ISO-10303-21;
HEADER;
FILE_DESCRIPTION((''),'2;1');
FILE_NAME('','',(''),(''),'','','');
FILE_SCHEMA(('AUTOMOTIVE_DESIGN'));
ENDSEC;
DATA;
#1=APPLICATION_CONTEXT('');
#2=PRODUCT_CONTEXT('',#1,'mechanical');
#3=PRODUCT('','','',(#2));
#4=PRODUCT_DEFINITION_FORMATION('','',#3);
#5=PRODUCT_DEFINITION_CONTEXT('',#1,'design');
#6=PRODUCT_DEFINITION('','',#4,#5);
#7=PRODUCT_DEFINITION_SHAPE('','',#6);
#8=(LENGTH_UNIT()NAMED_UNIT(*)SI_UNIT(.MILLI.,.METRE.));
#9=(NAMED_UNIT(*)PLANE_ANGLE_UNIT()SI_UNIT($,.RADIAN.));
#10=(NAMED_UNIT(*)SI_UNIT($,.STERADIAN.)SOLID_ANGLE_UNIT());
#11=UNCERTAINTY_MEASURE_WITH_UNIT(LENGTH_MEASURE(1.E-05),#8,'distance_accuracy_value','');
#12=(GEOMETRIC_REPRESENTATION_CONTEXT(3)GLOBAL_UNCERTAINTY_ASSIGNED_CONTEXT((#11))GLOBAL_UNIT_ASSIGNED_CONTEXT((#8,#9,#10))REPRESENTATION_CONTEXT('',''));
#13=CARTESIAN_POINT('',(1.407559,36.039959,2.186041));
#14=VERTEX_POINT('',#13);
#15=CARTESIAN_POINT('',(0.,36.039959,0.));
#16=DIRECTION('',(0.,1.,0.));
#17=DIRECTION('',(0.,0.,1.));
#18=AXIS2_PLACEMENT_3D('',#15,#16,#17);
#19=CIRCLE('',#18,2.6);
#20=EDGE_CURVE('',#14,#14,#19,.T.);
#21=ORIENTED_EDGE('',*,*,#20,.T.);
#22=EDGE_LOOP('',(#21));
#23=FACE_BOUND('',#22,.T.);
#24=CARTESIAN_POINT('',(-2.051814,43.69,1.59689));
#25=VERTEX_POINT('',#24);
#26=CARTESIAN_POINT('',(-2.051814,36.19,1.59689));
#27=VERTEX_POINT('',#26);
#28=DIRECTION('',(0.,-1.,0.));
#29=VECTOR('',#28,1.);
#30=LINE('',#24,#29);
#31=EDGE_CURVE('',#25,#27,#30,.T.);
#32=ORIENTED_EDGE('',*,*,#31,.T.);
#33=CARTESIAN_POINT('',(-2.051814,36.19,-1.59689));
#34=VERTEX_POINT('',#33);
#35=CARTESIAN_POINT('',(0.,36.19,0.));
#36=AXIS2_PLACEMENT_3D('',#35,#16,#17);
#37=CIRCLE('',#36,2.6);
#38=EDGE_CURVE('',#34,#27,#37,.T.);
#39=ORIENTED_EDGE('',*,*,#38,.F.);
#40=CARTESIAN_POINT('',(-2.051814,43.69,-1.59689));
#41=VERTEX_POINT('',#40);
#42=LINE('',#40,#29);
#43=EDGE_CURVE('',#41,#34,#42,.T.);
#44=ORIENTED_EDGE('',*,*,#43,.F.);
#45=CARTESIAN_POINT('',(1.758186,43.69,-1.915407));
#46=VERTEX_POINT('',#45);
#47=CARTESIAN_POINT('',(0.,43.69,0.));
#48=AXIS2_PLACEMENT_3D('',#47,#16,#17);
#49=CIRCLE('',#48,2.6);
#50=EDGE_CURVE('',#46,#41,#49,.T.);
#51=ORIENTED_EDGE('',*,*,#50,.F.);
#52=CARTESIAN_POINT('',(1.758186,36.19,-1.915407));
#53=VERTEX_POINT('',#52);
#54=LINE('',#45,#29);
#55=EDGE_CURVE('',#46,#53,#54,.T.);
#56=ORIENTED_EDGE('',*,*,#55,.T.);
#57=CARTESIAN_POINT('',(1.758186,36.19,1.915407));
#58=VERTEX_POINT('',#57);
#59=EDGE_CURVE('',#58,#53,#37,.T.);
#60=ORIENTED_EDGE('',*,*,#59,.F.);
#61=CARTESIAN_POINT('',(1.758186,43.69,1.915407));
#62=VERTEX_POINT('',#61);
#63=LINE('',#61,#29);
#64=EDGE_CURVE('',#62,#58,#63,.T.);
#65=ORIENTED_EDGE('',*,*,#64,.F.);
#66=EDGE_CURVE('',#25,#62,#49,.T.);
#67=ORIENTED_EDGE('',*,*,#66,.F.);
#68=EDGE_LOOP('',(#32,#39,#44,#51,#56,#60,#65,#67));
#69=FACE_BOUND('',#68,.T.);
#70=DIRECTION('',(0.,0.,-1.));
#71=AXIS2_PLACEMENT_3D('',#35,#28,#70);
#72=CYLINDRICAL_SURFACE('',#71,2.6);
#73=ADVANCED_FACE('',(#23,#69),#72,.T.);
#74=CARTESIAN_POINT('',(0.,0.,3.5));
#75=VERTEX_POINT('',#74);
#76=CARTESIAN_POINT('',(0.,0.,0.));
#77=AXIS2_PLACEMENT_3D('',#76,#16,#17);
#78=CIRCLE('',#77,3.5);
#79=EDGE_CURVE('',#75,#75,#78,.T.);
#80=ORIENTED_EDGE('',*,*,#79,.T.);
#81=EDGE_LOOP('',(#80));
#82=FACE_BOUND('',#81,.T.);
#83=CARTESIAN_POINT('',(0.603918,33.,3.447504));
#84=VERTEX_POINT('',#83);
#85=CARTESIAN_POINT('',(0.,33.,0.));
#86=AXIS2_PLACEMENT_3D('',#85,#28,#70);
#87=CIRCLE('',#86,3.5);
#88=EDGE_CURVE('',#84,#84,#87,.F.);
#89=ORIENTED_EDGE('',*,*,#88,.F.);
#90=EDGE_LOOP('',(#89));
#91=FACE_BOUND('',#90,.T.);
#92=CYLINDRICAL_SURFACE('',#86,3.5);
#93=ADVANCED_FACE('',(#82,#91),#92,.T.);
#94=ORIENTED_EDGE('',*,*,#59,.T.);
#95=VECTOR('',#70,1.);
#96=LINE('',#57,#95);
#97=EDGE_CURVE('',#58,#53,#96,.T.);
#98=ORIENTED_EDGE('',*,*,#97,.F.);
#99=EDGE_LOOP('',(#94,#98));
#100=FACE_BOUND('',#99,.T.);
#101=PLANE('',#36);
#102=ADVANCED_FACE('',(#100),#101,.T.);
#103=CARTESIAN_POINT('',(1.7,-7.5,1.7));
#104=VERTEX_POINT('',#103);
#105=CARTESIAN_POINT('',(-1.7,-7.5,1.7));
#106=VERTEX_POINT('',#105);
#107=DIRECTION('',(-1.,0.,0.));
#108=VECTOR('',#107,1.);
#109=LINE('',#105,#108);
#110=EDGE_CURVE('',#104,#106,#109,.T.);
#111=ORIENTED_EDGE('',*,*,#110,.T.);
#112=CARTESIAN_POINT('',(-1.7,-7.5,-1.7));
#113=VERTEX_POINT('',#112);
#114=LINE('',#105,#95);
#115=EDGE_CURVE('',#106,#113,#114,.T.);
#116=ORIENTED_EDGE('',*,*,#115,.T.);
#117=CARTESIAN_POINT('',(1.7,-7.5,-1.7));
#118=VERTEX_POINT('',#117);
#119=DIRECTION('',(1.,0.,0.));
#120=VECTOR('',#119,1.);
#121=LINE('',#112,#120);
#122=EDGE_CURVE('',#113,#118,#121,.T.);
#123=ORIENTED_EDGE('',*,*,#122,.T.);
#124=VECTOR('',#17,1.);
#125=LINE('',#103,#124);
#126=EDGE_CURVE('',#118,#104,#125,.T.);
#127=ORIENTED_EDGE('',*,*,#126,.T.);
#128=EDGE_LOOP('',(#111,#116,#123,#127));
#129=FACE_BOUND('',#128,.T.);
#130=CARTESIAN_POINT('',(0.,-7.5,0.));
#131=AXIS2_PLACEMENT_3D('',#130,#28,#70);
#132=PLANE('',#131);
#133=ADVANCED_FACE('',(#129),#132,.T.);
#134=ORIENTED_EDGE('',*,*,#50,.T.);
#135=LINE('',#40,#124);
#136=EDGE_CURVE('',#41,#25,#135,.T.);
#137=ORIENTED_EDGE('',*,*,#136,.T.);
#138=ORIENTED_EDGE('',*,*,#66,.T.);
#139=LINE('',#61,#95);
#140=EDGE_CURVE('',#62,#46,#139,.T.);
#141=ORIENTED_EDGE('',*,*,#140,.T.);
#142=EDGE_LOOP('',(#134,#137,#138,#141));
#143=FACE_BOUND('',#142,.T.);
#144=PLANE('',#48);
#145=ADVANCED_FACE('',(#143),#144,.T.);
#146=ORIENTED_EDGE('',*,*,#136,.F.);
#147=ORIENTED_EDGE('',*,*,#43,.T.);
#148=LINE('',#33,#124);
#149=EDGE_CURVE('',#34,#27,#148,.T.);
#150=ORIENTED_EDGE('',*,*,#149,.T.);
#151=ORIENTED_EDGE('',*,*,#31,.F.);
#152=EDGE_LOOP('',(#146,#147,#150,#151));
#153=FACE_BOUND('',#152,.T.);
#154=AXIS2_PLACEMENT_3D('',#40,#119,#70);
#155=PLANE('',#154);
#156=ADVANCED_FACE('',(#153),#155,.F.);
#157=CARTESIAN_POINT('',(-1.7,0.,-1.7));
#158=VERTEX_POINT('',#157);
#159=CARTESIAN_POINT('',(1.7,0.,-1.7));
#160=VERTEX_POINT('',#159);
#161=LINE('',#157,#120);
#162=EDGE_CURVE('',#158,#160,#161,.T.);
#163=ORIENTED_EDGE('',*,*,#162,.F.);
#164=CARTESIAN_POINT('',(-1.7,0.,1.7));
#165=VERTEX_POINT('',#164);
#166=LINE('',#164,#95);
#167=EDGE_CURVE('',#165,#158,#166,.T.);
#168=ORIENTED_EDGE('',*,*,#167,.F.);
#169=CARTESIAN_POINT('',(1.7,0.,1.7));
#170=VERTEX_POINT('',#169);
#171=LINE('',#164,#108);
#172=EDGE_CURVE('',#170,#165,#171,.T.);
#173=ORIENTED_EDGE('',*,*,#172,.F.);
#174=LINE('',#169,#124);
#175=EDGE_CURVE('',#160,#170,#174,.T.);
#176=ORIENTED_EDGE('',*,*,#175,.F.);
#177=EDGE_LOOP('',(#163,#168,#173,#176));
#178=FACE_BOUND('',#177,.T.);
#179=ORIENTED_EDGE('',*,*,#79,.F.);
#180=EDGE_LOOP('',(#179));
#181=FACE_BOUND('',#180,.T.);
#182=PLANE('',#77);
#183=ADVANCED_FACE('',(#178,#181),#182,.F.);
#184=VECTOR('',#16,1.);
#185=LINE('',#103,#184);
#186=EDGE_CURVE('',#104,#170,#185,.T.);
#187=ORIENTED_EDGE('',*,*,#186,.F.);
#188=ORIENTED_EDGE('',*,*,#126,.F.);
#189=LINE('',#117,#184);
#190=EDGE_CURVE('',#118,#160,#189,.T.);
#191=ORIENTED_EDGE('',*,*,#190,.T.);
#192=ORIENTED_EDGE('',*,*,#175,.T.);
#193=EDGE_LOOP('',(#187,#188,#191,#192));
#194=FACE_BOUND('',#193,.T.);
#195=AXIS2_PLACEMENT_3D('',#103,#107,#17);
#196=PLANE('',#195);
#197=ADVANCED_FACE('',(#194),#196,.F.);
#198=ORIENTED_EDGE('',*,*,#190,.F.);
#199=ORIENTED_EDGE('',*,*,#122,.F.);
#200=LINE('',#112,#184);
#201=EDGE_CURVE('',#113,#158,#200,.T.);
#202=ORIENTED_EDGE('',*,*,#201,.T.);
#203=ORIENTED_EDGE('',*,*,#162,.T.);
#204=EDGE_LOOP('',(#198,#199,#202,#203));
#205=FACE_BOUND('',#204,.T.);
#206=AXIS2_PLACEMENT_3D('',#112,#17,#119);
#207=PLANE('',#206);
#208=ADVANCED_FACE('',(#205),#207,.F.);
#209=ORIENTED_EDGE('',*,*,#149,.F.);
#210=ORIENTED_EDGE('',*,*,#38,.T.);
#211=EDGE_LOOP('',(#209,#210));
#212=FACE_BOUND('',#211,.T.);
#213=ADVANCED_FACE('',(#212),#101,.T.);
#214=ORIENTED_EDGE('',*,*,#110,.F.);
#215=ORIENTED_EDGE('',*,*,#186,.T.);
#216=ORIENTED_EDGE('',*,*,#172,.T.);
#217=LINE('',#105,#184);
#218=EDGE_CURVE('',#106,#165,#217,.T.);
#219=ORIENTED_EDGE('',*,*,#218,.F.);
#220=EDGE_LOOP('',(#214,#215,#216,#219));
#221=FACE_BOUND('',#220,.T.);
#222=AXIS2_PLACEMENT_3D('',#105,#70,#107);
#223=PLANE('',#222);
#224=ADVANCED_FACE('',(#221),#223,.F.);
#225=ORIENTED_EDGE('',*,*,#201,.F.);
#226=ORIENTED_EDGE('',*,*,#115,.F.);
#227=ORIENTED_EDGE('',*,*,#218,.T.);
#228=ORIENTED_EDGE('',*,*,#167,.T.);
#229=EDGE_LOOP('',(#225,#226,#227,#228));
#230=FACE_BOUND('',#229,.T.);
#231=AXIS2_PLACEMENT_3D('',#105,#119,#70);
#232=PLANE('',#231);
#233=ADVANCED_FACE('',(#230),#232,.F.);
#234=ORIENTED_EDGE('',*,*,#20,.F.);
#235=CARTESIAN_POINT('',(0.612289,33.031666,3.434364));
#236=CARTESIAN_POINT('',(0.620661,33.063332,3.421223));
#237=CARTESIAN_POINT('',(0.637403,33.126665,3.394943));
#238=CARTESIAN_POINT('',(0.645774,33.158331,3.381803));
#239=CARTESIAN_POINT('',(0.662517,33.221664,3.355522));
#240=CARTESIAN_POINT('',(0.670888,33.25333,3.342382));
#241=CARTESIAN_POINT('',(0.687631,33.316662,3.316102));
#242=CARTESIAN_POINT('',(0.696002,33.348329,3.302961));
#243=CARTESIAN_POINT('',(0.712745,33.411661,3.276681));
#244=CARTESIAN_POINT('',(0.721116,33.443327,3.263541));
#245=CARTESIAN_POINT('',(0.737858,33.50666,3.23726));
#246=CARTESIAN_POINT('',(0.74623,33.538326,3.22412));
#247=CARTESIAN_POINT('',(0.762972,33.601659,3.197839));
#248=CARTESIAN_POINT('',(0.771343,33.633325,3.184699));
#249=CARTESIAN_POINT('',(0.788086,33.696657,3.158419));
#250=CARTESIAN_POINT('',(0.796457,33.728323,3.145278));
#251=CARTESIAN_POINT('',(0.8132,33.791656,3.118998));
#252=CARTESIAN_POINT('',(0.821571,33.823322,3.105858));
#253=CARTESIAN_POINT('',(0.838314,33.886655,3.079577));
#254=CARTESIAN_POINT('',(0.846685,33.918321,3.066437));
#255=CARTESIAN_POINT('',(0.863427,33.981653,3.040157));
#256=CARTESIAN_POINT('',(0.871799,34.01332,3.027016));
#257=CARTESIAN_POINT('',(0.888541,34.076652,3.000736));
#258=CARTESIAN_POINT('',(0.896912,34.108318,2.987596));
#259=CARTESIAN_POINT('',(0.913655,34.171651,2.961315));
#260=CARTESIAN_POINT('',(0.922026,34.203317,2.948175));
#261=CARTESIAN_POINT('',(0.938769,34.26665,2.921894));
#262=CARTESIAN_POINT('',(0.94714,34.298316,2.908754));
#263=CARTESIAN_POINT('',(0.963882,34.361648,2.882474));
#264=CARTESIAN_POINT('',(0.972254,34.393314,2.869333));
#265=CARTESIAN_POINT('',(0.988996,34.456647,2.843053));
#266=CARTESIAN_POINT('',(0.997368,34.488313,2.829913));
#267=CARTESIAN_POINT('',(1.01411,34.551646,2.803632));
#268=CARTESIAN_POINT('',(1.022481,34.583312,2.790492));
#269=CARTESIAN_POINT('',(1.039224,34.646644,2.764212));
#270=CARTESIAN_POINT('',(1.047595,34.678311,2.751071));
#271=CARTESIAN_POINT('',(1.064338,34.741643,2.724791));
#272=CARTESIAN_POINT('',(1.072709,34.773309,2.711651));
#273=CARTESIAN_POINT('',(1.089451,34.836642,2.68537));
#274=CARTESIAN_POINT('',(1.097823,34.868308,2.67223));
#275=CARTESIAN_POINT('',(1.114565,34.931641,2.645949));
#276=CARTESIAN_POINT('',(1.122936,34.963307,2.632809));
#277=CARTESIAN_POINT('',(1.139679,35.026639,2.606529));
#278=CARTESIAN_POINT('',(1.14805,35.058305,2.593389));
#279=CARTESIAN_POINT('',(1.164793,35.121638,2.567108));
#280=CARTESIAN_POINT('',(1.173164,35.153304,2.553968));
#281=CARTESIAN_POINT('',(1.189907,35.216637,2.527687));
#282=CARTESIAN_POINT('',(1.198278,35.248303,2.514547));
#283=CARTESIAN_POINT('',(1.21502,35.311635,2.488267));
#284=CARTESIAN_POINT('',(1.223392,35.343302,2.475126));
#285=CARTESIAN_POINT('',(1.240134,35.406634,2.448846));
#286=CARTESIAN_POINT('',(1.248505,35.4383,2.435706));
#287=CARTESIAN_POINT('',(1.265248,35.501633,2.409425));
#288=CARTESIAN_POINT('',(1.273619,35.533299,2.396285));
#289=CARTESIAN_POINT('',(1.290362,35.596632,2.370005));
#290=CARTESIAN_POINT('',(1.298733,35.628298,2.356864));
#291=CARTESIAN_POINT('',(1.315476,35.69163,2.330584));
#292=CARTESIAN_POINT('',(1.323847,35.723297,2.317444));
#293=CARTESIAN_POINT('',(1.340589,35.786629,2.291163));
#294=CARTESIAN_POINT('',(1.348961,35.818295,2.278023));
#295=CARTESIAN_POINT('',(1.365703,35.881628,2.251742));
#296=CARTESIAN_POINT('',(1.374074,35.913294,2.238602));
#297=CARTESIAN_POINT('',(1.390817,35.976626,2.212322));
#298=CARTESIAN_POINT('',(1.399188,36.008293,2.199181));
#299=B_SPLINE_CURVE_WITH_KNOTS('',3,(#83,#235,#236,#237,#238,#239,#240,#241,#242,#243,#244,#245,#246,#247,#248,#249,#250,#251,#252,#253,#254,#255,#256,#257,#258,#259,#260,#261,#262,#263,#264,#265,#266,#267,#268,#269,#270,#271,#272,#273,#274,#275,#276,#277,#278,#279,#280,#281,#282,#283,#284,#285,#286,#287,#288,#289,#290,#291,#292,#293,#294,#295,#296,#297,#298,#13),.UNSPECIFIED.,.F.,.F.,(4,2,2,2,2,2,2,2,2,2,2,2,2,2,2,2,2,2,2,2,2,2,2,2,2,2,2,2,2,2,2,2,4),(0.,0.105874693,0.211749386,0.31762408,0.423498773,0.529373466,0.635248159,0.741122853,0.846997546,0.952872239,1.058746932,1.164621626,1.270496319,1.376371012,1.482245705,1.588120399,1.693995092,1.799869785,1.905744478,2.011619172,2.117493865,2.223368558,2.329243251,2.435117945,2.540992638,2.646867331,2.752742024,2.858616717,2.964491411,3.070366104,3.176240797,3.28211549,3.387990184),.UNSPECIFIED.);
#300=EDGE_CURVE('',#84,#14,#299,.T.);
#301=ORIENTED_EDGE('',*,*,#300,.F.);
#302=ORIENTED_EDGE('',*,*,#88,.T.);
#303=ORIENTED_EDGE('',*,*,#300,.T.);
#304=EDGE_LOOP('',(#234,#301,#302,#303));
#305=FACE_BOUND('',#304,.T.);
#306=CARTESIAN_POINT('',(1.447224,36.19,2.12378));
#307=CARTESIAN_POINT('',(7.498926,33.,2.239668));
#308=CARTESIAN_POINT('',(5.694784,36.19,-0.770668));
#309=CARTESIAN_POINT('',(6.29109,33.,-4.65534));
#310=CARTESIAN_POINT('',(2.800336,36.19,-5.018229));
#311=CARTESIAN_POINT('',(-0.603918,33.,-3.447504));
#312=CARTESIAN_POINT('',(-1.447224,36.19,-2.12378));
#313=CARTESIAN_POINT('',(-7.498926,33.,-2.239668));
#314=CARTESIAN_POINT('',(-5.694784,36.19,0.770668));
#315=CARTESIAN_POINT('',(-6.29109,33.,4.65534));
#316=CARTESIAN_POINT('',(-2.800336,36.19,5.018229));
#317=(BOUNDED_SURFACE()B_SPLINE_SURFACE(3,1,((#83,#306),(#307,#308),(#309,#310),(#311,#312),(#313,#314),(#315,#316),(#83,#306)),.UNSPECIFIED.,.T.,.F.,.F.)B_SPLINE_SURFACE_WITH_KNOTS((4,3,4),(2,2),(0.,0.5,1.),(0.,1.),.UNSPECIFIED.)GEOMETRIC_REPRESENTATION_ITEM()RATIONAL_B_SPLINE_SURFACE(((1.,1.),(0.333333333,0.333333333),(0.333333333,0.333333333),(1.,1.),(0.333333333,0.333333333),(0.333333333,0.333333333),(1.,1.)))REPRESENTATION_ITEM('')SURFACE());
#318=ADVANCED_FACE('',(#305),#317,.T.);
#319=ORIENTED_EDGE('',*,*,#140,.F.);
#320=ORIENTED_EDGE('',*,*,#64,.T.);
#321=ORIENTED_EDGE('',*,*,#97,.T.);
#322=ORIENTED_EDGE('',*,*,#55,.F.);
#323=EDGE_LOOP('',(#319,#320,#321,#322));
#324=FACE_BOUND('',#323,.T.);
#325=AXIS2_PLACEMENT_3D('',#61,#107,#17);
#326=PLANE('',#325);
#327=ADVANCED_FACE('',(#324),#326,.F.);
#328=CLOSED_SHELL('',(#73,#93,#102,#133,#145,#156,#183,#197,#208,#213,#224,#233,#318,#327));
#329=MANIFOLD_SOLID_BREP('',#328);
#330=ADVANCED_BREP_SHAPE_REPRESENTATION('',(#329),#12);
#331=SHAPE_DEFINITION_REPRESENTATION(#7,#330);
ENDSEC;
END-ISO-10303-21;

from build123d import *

# Parameters (mm, degrees)
SKETCH1_R           = 3.5
BOSS_EXTRUDE1_DEPTH = 33
SKETCH2_R           = 2.6
BOSS_EXTRUDE2_DEPTH = 3.19
BOSS_EXTRUDE3_DEPTH = 7.5
SKETCH5_W           = 3.4
SKETCH5_H           = 3.4
BOSS_EXTRUDE4_DEPTH = 7.5


with BuildPart() as part:
    # Sketch1 → Boss-Extrude1 (new body)
    with BuildSketch(Plane(origin=(0, 0, 0), x_dir=(1, 0, 0), z_dir=(0, 1, 0))):
        with Locations(Location((0, 0, 0), (0, 0, 270))):
            Circle(SKETCH1_R)
    extrude(amount=BOSS_EXTRUDE1_DEPTH)

    # Sketch2 → Boss-Extrude2 (add)
    with BuildSketch(Plane(origin=(0, 33, 0), x_dir=(1, 0, 0), z_dir=(0, 1, 0))):
        with Locations(Location((0, 0, 0), (0, 0, 90))):
            Circle(SKETCH2_R)
    extrude(amount=BOSS_EXTRUDE2_DEPTH)

    # Sketch4 → Boss-Extrude3 (add)
    with BuildSketch(Plane(origin=(0, 36.19, 0), x_dir=(1, 0, 0), z_dir=(0, 1, 0))):
        with BuildLine():
            Line((1.758185656, -1.915406798), (1.758185656, 1.915406798))
            ThreePointArc((1.758185656, 1.915406798), (-0.216604889, 2.59096166), (-2.051814344, 1.59689007))
            Line((-2.051814344, 1.59689007), (-2.051814344, -1.59689007))
            ThreePointArc((-2.051814344, -1.59689007), (-0.216604889, -2.59096166), (1.758185656, -1.915406798))
        make_face()
    extrude(amount=BOSS_EXTRUDE3_DEPTH)

    # Loft2: read off the stored shape, not the designer's step
    # Loft2: loft between two sections, ruled curve by curve
    loft2_from = [
        Edge.make_bspline([(0.603918101, 33, 3.447503869), (7.498925839, 33, 2.239667668), (6.291089638, 33, -4.65534007), (-0.603918101, 33, -3.447503869), (-7.498925839, 33, -2.239667668), (-6.291089638, 33, 4.65534007), (0.603918101, 33, 3.447503869)], [0, 0, 0, 0, 0.5, 0.5, 0.5, 1, 1, 1, 1], 3, [1, 0.333333333, 0.333333333, 1, 0.333333333, 0.333333333, 1]),
    ]
    loft2_to = [
        Edge.make_bspline([(1.447224244, 36.19, 2.123780118), (5.694784479, 36.19, -0.77066837), (2.800335991, 36.19, -5.018228605), (-1.447224244, 36.19, -2.123780118), (-5.694784479, 36.19, 0.77066837), (-2.800335991, 36.19, 5.018228605), (1.447224244, 36.19, 2.123780118)], [0, 0, 0, 0, 0.5, 0.5, 0.5, 1, 1, 1, 1], 3, [1, 0.333333333, 0.333333333, 1, 0.333333333, 0.333333333, 1]),
    ]
    loft2 = Solid(Shell([*[Face.make_surface_from_curves(loft2_from[k], loft2_to[k]) for k in range(1)], Face(Wire(loft2_from)), Face(Wire(loft2_to))]))
    add(loft2)

    # Sketch5 → Boss-Extrude4 (add)
    with BuildSketch(Plane.XZ):
        Rectangle(SKETCH5_W, SKETCH5_H)
    extrude(amount=BOSS_EXTRUDE4_DEPTH)


solid = part.part
